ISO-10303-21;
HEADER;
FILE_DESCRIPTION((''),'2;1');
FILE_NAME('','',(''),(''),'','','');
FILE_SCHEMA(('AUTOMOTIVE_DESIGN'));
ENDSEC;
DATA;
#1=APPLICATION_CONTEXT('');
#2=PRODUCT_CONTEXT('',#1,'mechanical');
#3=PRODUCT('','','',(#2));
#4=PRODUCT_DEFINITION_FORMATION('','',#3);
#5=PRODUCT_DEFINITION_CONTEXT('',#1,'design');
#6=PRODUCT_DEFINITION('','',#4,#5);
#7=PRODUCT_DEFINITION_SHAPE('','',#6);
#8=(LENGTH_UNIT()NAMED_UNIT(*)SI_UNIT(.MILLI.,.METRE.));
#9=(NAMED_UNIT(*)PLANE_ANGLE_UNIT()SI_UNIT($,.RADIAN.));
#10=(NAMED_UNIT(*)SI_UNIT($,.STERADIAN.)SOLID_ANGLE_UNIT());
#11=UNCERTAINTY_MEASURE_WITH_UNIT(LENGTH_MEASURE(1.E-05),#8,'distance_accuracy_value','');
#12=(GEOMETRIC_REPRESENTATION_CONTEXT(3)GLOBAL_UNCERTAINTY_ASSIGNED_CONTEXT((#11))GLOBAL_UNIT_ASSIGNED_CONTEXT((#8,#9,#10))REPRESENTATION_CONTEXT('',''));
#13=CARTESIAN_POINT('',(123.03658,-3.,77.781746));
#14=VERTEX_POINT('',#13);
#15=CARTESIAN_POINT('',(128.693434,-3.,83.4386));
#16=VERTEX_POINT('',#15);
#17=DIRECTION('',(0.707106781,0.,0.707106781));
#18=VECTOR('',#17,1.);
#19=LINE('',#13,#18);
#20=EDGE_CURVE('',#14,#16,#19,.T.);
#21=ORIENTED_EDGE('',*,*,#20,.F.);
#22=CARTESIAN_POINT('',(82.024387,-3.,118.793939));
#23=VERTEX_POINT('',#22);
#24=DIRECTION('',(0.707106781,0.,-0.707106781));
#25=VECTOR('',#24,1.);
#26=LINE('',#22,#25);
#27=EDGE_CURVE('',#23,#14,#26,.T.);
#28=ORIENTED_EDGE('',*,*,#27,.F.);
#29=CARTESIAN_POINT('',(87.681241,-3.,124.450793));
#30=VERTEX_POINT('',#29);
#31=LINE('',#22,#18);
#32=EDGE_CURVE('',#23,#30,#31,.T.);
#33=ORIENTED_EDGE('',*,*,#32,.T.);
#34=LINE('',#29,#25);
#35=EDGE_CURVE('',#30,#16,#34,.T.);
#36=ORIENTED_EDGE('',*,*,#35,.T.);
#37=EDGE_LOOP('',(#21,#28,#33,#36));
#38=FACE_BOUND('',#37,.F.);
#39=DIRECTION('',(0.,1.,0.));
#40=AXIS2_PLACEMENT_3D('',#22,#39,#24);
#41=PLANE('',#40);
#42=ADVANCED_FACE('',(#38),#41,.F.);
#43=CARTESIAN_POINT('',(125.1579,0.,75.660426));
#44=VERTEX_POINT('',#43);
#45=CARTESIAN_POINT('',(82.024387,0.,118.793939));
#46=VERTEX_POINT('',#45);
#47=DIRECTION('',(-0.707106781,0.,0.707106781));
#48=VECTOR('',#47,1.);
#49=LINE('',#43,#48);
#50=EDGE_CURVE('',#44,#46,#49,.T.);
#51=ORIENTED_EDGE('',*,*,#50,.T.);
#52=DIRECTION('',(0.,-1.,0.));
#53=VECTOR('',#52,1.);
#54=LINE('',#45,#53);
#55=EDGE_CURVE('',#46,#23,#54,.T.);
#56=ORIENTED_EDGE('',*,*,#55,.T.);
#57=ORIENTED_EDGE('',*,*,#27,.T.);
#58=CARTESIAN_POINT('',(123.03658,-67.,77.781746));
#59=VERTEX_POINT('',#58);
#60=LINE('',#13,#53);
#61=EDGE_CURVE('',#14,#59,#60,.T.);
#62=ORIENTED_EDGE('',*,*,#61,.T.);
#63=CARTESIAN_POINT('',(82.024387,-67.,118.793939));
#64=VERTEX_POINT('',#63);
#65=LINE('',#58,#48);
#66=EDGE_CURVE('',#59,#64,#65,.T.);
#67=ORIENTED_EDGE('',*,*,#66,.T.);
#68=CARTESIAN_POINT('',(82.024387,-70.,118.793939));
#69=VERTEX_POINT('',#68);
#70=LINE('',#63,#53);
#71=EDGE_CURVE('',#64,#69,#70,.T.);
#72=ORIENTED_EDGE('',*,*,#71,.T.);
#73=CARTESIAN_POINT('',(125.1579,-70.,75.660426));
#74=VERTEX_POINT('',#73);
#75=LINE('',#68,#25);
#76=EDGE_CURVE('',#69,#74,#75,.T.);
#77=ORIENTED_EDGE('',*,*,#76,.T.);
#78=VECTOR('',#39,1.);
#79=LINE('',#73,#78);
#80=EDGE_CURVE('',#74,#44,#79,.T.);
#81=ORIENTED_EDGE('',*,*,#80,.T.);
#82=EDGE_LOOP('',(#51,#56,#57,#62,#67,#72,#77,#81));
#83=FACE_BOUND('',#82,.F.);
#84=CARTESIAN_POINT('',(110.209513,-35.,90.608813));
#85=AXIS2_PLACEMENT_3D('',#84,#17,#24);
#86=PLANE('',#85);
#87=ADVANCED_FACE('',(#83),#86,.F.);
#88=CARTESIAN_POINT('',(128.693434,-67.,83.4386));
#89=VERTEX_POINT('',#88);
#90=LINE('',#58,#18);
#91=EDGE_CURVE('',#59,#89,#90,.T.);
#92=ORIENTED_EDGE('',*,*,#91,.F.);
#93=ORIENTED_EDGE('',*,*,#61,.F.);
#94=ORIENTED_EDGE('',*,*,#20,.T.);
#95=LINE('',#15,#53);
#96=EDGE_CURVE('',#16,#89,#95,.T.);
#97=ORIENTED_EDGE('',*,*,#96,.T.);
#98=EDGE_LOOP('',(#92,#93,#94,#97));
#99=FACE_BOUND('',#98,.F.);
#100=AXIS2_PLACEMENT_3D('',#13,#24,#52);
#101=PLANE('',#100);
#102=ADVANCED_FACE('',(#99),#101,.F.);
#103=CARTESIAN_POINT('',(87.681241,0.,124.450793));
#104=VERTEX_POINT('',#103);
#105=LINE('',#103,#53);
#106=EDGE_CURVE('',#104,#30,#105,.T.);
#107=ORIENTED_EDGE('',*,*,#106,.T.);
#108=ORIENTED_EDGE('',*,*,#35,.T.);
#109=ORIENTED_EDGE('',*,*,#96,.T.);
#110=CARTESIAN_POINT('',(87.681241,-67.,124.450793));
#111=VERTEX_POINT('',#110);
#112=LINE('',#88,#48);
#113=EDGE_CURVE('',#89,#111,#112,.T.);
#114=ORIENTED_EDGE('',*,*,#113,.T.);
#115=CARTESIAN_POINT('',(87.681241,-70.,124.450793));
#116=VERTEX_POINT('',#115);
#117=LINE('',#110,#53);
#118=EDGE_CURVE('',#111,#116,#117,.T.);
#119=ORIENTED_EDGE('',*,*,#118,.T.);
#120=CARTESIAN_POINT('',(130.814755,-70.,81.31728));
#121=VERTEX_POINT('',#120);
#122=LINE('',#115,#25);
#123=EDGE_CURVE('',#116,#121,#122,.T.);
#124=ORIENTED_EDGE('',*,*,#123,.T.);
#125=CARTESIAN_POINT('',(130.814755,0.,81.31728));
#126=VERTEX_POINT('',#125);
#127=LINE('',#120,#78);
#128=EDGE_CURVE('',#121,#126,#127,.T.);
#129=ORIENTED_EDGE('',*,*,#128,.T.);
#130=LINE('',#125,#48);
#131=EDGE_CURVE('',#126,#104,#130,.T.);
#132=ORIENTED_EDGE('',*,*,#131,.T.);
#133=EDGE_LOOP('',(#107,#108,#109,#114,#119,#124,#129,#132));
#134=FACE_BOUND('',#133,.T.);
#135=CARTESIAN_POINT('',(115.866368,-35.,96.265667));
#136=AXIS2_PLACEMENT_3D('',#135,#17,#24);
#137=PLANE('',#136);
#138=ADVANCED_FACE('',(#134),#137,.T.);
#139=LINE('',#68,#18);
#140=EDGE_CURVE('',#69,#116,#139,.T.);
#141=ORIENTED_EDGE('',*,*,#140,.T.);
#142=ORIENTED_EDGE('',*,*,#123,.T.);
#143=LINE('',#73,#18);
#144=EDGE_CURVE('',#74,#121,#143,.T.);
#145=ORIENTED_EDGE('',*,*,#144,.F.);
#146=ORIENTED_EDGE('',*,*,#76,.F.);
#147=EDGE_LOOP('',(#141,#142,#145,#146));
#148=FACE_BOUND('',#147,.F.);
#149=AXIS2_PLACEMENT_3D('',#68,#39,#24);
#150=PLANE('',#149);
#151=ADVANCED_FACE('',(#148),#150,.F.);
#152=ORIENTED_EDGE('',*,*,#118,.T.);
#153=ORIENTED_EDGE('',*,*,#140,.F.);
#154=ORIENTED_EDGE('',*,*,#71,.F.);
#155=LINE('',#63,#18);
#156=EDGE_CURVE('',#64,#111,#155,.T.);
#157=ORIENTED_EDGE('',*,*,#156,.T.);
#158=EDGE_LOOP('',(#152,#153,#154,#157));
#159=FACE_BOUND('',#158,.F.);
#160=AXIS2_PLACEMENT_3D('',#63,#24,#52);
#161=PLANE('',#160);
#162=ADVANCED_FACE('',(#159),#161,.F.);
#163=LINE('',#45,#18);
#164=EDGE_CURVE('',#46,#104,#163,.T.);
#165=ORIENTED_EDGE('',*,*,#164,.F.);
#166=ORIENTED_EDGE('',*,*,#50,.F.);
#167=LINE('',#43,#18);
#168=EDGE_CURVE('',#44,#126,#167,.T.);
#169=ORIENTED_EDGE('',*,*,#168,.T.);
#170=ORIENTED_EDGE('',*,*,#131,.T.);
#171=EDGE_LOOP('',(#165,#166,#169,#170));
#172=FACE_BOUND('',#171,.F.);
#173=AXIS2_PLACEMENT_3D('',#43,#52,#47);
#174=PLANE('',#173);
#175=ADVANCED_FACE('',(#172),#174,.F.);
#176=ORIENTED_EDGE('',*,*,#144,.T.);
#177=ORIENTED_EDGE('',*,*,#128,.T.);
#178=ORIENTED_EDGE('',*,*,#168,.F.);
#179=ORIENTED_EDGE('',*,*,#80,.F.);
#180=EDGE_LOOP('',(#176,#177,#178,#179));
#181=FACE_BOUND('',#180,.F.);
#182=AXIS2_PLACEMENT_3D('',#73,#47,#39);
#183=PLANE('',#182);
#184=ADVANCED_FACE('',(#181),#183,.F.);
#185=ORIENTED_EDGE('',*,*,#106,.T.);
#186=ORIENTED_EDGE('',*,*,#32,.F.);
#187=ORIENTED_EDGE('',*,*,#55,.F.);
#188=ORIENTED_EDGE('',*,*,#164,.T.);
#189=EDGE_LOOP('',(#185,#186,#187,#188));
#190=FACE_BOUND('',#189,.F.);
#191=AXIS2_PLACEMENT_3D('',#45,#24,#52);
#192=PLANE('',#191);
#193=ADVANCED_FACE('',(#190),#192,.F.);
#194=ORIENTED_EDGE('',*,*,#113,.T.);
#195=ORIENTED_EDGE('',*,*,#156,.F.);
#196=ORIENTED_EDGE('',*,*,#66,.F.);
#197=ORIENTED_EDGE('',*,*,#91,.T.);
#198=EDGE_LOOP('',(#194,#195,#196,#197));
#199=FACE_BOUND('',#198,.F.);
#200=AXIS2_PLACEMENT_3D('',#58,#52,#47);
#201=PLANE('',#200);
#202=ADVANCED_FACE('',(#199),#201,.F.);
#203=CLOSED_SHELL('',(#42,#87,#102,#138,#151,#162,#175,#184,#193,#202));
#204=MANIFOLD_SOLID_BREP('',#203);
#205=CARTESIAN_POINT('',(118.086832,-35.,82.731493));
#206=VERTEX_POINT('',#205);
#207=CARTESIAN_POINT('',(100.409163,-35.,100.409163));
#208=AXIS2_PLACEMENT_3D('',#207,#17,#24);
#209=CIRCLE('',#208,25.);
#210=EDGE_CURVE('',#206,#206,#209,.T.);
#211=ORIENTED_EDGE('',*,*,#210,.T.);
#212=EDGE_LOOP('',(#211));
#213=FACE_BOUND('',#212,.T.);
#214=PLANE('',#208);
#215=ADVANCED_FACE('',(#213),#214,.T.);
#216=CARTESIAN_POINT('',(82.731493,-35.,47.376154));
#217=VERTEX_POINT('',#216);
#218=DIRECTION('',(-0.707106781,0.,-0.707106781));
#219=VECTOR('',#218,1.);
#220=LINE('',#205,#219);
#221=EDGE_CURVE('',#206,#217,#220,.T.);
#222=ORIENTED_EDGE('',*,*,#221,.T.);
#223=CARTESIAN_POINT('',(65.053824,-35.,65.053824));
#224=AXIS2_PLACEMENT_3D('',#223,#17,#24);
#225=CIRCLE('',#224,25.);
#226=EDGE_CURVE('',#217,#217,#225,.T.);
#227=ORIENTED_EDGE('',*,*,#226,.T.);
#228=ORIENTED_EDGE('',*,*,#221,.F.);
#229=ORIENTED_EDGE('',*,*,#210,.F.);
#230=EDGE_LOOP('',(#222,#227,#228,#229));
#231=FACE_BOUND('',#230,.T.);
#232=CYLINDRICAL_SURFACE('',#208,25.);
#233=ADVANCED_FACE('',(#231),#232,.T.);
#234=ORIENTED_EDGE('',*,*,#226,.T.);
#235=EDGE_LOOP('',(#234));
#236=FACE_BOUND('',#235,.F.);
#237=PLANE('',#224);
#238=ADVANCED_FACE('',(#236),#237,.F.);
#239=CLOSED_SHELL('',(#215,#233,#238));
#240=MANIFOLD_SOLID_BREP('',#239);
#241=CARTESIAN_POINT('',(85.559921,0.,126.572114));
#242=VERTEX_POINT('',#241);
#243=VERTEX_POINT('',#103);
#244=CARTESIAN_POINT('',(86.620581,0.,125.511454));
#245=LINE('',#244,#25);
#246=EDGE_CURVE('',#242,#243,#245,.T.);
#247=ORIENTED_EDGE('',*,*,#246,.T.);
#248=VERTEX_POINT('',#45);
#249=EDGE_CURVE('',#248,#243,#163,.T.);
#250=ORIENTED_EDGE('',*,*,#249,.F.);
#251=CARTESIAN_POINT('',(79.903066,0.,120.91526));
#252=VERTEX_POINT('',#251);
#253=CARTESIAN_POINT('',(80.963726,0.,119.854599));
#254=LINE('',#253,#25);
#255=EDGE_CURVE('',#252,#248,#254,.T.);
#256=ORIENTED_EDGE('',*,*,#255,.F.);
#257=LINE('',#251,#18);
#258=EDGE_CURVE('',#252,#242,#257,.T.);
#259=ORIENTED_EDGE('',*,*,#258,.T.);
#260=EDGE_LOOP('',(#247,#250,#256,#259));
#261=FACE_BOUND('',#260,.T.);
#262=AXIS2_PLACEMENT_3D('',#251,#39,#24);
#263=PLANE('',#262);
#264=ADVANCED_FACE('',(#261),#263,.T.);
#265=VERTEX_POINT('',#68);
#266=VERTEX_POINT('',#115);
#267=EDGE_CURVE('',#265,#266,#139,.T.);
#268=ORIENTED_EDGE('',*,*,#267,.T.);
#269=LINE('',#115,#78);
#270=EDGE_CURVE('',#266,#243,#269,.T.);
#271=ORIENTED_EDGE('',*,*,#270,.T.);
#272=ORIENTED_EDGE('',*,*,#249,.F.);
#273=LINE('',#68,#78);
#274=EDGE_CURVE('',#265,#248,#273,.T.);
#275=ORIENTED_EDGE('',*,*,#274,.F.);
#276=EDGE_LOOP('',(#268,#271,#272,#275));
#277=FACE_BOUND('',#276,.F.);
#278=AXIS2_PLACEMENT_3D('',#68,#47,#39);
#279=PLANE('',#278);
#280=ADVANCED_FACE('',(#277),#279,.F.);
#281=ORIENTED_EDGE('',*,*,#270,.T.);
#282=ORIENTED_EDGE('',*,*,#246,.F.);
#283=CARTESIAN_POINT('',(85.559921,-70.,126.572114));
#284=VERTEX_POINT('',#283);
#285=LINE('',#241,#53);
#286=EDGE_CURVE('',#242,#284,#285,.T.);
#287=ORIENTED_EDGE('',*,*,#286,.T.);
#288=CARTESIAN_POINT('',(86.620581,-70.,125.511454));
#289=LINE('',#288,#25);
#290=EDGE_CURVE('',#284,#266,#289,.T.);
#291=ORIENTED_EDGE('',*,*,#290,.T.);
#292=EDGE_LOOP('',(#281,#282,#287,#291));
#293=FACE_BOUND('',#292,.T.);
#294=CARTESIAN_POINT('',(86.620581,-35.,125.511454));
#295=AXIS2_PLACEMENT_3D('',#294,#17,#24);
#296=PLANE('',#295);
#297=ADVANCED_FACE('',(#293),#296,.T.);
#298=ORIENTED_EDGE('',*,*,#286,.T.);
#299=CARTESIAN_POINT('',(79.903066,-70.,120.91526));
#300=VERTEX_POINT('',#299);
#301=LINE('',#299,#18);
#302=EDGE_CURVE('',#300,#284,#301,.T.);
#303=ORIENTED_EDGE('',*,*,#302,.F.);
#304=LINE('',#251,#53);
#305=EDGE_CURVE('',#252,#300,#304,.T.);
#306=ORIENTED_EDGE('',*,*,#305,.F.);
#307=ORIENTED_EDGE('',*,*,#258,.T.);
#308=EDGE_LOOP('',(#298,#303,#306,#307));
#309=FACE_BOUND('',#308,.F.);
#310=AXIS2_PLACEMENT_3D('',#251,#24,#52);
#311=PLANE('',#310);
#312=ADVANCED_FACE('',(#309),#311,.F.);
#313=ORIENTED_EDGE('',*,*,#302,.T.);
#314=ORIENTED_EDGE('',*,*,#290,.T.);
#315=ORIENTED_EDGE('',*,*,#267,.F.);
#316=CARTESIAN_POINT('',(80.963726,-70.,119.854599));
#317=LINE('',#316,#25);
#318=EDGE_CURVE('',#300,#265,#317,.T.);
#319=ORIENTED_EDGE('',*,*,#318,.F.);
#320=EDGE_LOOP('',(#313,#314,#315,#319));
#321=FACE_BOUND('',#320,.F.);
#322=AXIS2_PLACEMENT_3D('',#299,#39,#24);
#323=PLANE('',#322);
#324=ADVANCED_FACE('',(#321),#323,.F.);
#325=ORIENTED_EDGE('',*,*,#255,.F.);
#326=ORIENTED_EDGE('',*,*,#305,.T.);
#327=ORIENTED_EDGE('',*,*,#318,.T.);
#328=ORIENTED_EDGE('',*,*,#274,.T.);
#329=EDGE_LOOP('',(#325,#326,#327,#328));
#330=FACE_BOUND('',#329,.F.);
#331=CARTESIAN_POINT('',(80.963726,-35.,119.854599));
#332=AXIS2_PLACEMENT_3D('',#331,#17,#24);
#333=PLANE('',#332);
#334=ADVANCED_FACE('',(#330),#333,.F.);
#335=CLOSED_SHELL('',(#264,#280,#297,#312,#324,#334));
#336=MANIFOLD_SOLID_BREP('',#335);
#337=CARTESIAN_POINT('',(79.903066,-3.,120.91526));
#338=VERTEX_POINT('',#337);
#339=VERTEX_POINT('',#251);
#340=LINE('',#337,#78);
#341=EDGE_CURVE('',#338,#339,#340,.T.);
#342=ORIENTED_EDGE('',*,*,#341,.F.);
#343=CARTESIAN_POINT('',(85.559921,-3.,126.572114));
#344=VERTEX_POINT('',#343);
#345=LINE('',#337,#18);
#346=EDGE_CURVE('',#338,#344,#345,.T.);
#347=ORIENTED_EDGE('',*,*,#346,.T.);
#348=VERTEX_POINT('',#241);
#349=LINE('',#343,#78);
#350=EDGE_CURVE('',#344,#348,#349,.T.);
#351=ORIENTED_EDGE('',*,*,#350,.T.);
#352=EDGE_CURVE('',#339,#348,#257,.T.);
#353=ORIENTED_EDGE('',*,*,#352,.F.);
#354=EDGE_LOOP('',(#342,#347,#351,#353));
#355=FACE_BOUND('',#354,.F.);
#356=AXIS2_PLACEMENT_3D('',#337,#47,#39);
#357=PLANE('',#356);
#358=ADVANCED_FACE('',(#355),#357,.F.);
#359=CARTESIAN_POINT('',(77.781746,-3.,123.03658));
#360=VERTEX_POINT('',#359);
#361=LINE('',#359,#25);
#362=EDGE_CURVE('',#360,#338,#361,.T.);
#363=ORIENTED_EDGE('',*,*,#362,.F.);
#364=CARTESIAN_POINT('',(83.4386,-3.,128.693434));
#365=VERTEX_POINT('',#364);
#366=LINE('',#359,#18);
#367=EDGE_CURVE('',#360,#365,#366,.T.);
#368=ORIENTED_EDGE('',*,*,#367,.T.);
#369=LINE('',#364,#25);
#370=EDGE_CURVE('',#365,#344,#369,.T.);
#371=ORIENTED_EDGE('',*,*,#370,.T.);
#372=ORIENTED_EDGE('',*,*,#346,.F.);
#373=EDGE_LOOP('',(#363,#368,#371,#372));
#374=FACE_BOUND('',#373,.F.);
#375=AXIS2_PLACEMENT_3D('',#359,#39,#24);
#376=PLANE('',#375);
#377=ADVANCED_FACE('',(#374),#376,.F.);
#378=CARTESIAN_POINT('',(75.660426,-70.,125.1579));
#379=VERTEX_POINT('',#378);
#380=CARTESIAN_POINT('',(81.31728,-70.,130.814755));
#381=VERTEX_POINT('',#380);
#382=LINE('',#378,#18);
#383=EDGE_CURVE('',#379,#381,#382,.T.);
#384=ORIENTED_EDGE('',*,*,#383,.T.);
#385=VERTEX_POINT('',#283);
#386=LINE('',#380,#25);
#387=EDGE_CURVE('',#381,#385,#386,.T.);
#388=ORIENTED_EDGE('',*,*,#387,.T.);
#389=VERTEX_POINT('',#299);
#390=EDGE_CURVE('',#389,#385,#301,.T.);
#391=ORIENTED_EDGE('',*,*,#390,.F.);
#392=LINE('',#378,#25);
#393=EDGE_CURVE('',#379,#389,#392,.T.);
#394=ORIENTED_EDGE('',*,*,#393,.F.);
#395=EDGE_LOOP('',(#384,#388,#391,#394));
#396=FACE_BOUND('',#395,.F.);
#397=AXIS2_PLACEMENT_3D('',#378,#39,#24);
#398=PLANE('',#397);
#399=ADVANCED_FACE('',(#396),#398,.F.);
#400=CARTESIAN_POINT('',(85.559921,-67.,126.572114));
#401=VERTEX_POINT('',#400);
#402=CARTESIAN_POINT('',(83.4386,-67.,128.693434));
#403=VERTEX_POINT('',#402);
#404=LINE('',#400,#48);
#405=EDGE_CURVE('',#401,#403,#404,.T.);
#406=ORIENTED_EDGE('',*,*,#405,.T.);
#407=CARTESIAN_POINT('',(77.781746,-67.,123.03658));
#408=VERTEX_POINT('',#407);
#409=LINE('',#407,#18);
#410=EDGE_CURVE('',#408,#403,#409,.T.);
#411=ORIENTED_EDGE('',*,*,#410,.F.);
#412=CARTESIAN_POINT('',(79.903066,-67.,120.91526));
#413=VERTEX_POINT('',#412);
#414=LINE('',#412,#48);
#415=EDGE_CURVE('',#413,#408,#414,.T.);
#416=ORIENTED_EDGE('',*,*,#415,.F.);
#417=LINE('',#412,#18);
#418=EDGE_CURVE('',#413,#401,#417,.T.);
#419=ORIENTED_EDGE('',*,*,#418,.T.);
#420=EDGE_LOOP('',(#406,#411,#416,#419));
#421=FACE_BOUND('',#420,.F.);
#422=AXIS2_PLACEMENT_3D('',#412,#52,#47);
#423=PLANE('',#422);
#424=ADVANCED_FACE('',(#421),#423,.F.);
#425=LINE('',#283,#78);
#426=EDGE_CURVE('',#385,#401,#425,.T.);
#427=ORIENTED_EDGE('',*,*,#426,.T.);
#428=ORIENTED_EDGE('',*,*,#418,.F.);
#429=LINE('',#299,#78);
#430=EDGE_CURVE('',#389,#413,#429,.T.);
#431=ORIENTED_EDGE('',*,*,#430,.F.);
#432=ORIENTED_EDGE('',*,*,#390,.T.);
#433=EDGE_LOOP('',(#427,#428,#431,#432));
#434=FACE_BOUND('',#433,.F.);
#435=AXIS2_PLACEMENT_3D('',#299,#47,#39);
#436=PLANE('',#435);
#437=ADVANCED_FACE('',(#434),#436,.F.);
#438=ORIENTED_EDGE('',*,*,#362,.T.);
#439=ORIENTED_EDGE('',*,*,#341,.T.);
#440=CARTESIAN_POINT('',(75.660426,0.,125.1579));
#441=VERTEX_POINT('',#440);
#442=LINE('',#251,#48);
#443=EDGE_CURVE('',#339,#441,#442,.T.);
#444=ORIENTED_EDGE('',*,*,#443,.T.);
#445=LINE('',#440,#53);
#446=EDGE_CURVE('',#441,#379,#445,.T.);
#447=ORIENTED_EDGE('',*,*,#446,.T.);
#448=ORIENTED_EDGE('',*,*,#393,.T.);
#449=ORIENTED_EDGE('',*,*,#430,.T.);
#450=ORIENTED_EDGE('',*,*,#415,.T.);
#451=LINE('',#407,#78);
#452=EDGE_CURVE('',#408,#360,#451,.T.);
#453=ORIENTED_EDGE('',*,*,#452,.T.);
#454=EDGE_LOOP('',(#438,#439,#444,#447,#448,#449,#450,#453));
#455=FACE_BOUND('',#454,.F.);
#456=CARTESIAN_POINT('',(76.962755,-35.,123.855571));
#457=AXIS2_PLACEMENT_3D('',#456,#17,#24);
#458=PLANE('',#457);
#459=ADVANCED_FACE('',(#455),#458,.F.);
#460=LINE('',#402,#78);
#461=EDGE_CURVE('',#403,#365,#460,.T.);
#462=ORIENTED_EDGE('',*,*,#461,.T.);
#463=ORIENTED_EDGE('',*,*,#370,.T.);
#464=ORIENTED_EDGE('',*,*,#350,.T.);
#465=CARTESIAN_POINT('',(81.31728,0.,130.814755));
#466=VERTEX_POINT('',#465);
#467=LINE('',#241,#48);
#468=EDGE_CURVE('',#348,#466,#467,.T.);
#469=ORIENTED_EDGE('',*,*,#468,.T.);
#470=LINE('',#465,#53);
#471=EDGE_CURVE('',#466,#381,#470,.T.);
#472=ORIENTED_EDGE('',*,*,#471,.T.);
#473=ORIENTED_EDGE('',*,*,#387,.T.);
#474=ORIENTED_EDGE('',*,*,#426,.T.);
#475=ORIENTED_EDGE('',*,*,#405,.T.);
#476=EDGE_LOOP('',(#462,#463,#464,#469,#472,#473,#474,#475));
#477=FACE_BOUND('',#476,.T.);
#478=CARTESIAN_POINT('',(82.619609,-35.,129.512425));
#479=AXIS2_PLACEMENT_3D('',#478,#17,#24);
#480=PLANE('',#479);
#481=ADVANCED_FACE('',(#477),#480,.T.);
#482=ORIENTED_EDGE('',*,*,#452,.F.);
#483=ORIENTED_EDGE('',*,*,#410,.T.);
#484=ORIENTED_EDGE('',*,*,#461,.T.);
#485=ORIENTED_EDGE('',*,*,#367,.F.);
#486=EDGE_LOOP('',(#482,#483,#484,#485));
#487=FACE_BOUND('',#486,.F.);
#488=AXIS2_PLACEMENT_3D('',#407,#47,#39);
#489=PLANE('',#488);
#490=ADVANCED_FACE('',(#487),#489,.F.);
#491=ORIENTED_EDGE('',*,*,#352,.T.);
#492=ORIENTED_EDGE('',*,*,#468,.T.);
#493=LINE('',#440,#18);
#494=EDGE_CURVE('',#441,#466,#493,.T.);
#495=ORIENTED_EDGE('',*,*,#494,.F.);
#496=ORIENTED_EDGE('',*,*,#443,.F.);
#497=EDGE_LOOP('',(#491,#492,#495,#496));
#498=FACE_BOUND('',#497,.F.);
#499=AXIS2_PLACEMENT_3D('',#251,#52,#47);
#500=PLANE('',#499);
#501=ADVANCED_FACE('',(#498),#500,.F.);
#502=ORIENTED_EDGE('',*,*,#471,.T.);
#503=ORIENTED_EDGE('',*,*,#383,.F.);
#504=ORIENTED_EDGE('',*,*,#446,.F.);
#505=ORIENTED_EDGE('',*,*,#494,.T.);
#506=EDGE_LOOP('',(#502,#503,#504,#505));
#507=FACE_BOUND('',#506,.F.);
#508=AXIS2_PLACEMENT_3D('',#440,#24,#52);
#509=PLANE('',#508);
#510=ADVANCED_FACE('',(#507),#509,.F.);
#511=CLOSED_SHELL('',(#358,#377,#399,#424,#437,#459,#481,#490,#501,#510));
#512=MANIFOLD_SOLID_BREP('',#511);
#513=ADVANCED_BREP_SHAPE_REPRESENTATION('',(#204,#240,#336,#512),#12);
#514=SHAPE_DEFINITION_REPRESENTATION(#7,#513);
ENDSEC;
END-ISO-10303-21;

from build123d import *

# Parameters (mm, degrees)
F15_R     = 25
F16_DEPTH = 50
F15_W     = 3
F15_H     = 64
F15_H_2   = 3
F17_DEPTH = 8
F18_DEPTH = 8


with BuildPart() as f16:
    # F15 (on face) → F16 (new body)
    with BuildSketch(Plane(origin=(100.4091629285, 0, 100.4091629285), x_dir=(0.7071067812, 0, -0.7071067812), z_dir=(0.7071067812, 0, 0.7071067812))):
        with Locations((0, -35)):
            Circle(F15_R)
    extrude(amount=-F16_DEPTH)


with BuildPart() as f17:
    # F15 (on face) → F17 (new body)
    with BuildSketch(Plane(origin=(100.4091629285, 0, 100.4091629285), x_dir=(0.7071067812, 0, -0.7071067812), z_dir=(0.7071067812, 0, 0.7071067812))):
        with Locations((-27.5, -35)):
            Rectangle(F15_W, F15_H)
        with Locations((-27.5, -68.5)):
            Rectangle(F15_W, F15_H_2)
        with Locations((-27.5, -1.5)):
            Rectangle(F15_W, F15_H_2)
    extrude(amount=F17_DEPTH)


with BuildPart() as f18:
    # F15 (on face) → F18 (new body)
    with BuildSketch(Plane(origin=(100.4091629285, 0, 100.4091629285), x_dir=(0.7071067812, 0, -0.7071067812), z_dir=(0.7071067812, 0, 0.7071067812))):
        Polygon((-35, 0), (-35, -70), (-29, -70), (-29, -67), (-32, -67), (-32, -3), (-29, -3), (-29, 0), align=None)
    extrude(amount=F18_DEPTH)


with BuildPart() as f18b:
    # F15 (on face) → F18, piece 2 (new body)
    with BuildSketch(Plane(origin=(100.4091629285, 0, 100.4091629285), x_dir=(0.7071067812, 0, -0.7071067812), z_dir=(0.7071067812, 0, 0.7071067812))):
        Polygon((-26, -67), (-26, -70), (35, -70), (35, 0), (-26, 0), (-26, -3), (0, -3), (32, -3), (32, -67), (0, -67), align=None)
    extrude(amount=F18_DEPTH)


solid = Compound([f16.part, f17.part, f18.part, f18b.part])
